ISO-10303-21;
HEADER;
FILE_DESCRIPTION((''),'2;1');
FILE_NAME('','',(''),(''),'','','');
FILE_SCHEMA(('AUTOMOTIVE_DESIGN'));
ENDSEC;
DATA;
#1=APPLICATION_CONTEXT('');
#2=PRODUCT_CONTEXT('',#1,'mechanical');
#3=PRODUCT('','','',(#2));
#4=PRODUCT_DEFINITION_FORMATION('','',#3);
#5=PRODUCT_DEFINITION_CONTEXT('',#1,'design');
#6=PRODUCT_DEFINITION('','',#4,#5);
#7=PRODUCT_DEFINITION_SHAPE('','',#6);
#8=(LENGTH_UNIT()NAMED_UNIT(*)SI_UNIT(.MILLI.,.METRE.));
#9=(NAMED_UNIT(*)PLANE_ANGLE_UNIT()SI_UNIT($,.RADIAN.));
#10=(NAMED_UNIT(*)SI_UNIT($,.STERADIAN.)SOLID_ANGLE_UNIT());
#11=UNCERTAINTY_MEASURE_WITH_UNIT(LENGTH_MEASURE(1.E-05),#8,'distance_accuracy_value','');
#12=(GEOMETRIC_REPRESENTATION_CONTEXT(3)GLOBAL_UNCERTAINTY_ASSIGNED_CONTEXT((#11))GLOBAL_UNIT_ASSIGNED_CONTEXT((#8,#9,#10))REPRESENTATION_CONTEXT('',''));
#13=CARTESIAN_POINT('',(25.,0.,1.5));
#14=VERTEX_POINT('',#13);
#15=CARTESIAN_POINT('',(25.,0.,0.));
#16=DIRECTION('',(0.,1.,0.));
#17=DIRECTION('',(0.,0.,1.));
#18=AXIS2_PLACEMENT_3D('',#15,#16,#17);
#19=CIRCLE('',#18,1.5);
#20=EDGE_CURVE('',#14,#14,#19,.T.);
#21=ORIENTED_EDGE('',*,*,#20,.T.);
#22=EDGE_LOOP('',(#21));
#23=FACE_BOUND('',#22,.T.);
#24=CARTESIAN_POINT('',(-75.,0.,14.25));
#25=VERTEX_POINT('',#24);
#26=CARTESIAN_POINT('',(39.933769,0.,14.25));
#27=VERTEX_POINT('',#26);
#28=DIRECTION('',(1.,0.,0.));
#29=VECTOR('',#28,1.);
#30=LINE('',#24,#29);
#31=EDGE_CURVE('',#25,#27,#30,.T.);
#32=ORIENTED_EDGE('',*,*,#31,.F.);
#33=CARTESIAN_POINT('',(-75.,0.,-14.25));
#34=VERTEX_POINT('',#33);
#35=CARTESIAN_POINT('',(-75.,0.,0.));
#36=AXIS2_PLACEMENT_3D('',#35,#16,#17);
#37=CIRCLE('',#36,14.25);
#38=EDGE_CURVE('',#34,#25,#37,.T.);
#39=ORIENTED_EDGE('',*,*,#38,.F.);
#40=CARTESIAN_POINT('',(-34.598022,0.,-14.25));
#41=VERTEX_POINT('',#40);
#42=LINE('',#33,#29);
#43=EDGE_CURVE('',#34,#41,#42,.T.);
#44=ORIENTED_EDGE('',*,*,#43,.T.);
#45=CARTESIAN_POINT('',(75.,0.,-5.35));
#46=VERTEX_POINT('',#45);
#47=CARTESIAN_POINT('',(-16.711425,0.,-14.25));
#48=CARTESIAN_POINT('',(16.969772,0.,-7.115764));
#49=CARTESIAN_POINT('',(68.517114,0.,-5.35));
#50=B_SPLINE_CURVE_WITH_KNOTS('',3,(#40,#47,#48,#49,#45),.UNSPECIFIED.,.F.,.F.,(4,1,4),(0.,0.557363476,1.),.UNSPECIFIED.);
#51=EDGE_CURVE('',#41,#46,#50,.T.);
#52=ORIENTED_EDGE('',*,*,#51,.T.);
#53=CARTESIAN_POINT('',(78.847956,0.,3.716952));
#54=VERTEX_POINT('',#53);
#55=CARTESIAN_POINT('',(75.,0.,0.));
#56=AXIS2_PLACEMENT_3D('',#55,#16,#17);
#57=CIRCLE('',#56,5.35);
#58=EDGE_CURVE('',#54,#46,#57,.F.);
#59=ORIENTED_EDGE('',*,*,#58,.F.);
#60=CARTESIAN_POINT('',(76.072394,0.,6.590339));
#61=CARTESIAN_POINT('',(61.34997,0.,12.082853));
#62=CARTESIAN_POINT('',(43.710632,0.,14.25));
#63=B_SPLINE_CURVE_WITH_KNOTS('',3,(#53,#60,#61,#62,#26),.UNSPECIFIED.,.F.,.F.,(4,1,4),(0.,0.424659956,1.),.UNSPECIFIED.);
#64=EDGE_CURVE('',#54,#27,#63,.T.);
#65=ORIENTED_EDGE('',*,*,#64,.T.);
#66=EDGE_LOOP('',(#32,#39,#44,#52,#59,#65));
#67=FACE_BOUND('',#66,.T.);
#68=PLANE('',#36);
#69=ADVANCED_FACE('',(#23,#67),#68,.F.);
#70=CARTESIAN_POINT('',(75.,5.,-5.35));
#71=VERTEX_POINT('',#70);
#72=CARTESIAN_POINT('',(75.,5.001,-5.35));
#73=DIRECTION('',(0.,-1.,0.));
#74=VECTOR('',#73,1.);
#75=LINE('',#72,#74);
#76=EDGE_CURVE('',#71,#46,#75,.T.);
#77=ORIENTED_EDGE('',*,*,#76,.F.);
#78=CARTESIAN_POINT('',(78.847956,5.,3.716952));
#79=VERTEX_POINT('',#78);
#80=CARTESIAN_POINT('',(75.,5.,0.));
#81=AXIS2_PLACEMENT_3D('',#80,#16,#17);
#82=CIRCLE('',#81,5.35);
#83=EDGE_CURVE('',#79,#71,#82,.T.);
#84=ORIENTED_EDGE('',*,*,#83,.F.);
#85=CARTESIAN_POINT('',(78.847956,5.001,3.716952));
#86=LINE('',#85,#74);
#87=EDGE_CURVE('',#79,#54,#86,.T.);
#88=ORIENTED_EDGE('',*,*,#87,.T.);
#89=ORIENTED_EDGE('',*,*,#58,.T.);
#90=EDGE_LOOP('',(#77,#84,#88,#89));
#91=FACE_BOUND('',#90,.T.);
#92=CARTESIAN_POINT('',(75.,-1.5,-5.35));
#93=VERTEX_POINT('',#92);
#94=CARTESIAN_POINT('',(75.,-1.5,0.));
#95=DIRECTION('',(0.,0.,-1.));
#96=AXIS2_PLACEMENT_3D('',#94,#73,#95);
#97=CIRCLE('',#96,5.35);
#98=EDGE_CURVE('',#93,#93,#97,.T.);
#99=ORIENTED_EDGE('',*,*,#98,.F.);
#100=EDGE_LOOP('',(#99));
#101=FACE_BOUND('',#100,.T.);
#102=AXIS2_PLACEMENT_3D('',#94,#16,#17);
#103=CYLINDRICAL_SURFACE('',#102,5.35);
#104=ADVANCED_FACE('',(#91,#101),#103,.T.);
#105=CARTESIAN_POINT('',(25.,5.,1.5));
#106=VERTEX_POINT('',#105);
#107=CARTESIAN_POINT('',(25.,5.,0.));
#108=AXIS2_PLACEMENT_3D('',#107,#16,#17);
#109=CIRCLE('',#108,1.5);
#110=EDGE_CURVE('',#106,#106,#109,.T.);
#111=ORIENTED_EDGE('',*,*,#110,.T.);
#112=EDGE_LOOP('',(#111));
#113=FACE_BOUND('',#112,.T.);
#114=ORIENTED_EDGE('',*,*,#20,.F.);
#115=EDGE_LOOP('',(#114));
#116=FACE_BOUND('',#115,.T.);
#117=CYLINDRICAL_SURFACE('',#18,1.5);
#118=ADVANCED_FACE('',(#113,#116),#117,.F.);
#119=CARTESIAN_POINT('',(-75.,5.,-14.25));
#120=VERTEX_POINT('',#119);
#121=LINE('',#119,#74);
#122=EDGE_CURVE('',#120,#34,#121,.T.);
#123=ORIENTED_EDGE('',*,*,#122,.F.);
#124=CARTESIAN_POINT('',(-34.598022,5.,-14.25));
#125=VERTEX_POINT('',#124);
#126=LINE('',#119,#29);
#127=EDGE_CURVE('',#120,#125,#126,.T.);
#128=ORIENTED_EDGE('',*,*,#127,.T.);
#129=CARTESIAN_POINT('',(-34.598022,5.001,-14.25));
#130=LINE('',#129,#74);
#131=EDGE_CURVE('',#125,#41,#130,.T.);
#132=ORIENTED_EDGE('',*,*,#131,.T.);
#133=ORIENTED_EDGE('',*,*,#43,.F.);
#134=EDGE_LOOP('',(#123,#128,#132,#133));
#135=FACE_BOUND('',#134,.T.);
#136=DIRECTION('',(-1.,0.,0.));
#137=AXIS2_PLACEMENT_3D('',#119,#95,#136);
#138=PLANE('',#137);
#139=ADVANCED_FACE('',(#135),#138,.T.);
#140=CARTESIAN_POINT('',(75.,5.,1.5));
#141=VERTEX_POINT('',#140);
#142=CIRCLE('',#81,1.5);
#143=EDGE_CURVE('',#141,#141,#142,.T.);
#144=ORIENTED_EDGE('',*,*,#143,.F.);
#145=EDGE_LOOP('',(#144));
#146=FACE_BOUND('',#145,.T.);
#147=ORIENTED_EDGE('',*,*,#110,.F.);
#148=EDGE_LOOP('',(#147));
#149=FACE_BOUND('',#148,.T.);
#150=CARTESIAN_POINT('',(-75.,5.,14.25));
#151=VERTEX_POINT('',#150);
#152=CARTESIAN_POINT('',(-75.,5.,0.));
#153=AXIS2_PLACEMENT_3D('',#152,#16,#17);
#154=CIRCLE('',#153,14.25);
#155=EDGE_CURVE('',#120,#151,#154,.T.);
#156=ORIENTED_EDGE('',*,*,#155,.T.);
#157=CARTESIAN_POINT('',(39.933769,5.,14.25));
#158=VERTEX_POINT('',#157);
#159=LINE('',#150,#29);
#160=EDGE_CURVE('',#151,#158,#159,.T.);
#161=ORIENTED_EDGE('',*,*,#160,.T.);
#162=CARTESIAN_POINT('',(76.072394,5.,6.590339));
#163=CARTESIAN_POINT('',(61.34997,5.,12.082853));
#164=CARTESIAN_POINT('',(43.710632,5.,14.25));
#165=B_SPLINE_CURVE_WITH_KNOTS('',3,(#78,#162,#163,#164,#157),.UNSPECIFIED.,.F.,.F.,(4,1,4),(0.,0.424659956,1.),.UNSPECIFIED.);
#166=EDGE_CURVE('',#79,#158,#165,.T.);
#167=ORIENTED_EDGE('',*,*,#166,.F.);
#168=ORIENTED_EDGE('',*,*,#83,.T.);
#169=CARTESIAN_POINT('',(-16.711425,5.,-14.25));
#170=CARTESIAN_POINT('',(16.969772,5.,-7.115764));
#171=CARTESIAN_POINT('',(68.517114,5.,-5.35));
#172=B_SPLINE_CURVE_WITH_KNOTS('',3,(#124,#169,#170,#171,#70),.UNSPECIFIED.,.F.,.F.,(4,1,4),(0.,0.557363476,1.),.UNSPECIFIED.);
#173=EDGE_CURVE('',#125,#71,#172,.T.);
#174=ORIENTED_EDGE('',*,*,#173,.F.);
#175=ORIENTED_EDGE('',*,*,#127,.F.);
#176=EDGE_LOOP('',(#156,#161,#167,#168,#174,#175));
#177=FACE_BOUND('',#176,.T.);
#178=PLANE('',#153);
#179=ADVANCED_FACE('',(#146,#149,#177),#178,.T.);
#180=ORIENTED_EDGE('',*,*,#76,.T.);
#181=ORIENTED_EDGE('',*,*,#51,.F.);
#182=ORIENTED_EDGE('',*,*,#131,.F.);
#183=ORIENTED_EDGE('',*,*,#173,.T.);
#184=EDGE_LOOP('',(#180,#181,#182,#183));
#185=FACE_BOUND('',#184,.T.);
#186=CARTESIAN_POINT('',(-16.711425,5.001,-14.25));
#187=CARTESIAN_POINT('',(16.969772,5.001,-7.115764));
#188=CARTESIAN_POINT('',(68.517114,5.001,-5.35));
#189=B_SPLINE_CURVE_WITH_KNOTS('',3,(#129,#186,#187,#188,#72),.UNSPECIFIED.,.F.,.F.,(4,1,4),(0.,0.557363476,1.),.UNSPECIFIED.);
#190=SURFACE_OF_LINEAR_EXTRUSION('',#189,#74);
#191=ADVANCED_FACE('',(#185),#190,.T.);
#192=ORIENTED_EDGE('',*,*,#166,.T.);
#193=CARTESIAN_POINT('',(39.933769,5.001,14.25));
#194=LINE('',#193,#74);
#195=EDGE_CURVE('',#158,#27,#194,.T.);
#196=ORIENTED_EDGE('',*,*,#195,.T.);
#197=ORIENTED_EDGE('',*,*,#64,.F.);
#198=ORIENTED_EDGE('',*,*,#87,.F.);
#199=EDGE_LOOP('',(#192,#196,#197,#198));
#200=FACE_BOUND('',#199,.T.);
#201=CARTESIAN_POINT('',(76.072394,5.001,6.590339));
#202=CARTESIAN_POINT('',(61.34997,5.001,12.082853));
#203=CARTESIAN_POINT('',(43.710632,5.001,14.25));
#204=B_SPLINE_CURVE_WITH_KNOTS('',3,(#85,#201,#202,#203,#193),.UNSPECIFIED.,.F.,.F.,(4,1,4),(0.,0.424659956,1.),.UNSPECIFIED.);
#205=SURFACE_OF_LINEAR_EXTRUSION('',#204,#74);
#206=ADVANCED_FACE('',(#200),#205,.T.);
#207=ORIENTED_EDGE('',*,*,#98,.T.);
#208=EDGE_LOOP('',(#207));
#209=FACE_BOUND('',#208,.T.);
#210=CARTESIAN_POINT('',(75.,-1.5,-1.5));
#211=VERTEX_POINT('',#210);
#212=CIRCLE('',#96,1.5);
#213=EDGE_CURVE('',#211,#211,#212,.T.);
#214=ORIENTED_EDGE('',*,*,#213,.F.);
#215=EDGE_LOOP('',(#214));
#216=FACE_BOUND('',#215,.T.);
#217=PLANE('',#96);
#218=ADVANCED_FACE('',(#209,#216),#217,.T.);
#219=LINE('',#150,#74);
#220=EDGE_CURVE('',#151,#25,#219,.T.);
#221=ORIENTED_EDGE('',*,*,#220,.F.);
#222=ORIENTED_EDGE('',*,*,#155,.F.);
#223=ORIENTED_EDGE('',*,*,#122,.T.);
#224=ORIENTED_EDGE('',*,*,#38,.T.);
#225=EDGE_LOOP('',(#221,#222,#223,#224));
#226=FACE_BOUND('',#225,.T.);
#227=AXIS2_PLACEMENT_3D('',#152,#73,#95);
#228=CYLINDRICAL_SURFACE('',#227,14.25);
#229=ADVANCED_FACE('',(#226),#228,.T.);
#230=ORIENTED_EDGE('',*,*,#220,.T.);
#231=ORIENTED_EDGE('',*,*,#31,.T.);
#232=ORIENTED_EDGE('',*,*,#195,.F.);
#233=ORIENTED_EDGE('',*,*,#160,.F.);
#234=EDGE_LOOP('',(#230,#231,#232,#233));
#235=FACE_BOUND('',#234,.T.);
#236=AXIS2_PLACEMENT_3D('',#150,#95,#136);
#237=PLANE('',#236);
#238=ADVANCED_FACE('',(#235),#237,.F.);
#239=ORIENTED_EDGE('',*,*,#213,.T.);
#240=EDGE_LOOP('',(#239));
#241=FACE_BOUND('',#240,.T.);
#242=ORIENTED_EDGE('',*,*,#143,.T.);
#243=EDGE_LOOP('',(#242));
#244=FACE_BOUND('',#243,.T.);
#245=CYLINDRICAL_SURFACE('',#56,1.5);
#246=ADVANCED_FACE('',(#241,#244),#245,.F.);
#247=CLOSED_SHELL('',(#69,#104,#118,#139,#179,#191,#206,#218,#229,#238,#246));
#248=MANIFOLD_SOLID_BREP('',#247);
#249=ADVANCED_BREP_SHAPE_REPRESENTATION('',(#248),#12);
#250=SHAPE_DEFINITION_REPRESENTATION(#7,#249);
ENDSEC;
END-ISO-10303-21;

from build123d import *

# Parameters (mm, degrees)
BOSS_EXTRUDE1_DEPTH = 5
SKETCH4_R           = 1.5
CUT_EXTRUDE1_DEPTH  = 91.518644488
SKETCH6_R           = 5.35
BOSS_EXTRUDE2_DEPTH = 1.5
CUT_EXTRUDE2_REACH  = 92.614
SKETCH7_R           = 1.5
CUT_EXTRUDE3_START  = -5
CUT_EXTRUDE3_DEPTH  = 5


# Read off the part's stored shape, not the designer's step: Cut-Extrude3
with BuildPart() as part:
    # Sketch3 → Boss-Extrude1 (new body)
    with BuildSketch(Plane(origin=(0, 0, 0), x_dir=(1, 0, 0), z_dir=(0, 1, 0))):
        with BuildLine():
            Line((-75, 14.25), (75, 14.25))
            ThreePointArc((75, 14.25), (89.25, 0), (75, -14.25))
            Line((75, -14.25), (-75, -14.25))
            ThreePointArc((-75, -14.25), (-89.25, 0), (-75, 14.25))
        make_face()
    extrude(amount=BOSS_EXTRUDE1_DEPTH)

    # Sketch4 → Cut-Extrude1 (cut, through all)
    with BuildSketch(Plane(origin=(0, 5, 0), x_dir=(1, 0, 0), z_dir=(0, 1, 0))):
        with Locations(Location((25, 0, 0), (0, 0, 270))):
            Circle(SKETCH4_R)
        with Locations(Location((75, 0, 0), (0, 0, 270))):
            Circle(SKETCH4_R)
    extrude(amount=-CUT_EXTRUDE1_DEPTH, mode=Mode.SUBTRACT)

    # Sketch6 → Boss-Extrude2 (add)
    with BuildSketch(Plane.XZ):
        with Locations(Location((75, 0, 0), (0, 0, 90))):
            Circle(SKETCH6_R)
    extrude(amount=BOSS_EXTRUDE2_DEPTH)

    # Sketch7 → Cut-Extrude2 (cut, up to next)
    with BuildSketch(Plane.XZ.offset(1.5), mode=Mode.PRIVATE) as cut_extrude2_sk1:
        with Locations(Location((75, 0, 0), (0, 0, 90))):
            Circle(SKETCH7_R)
    cut_extrude2_tool1 = extrude(cut_extrude2_sk1.sketch, amount=-CUT_EXTRUDE2_REACH, mode=Mode.PRIVATE) & part.part
    add(cut_extrude2_tool1.solids().sort_by_distance((75, -1.5, 0))[0], mode=Mode.SUBTRACT)

    # Cut-Extrude3 outline → Cut-Extrude3 (cut)
    with BuildSketch(Plane.XZ.offset(CUT_EXTRUDE3_START)):
        with BuildLine():
            add(Edge.make_bspline(
                [(78.847956131, 3.716952194), (76.072393782, 6.590339205), (61.349969699, 12.082853178), (43.710632326, 14.25), (39.933768596, 14.25)],
                knots=[0, 0, 0, 0, 0.424659956, 1, 1, 1, 1], degree=3))
            ThreePointArc((78.847956131, 3.716952194), (79.924844883, -2.090072458), (75, -5.35))
            add(Edge.make_bspline(
                [(-34.598022438, -14.25), (-16.711424767, -14.25), (16.96977211, -7.115763951), (68.517114085, -5.35), (75, -5.35)],
                knots=[0, 0, 0, 0, 0.557363476, 1, 1, 1, 1], degree=3))
            Line((-34.598022438, -14.25), (75, -14.25))
            ThreePointArc((75, -14.25), (89.25, 0), (75, 14.25))
            Line((75, 14.25), (39.933768596, 14.25))
        make_face()
    extrude(amount=CUT_EXTRUDE3_DEPTH, mode=Mode.SUBTRACT)


solid = part.part
